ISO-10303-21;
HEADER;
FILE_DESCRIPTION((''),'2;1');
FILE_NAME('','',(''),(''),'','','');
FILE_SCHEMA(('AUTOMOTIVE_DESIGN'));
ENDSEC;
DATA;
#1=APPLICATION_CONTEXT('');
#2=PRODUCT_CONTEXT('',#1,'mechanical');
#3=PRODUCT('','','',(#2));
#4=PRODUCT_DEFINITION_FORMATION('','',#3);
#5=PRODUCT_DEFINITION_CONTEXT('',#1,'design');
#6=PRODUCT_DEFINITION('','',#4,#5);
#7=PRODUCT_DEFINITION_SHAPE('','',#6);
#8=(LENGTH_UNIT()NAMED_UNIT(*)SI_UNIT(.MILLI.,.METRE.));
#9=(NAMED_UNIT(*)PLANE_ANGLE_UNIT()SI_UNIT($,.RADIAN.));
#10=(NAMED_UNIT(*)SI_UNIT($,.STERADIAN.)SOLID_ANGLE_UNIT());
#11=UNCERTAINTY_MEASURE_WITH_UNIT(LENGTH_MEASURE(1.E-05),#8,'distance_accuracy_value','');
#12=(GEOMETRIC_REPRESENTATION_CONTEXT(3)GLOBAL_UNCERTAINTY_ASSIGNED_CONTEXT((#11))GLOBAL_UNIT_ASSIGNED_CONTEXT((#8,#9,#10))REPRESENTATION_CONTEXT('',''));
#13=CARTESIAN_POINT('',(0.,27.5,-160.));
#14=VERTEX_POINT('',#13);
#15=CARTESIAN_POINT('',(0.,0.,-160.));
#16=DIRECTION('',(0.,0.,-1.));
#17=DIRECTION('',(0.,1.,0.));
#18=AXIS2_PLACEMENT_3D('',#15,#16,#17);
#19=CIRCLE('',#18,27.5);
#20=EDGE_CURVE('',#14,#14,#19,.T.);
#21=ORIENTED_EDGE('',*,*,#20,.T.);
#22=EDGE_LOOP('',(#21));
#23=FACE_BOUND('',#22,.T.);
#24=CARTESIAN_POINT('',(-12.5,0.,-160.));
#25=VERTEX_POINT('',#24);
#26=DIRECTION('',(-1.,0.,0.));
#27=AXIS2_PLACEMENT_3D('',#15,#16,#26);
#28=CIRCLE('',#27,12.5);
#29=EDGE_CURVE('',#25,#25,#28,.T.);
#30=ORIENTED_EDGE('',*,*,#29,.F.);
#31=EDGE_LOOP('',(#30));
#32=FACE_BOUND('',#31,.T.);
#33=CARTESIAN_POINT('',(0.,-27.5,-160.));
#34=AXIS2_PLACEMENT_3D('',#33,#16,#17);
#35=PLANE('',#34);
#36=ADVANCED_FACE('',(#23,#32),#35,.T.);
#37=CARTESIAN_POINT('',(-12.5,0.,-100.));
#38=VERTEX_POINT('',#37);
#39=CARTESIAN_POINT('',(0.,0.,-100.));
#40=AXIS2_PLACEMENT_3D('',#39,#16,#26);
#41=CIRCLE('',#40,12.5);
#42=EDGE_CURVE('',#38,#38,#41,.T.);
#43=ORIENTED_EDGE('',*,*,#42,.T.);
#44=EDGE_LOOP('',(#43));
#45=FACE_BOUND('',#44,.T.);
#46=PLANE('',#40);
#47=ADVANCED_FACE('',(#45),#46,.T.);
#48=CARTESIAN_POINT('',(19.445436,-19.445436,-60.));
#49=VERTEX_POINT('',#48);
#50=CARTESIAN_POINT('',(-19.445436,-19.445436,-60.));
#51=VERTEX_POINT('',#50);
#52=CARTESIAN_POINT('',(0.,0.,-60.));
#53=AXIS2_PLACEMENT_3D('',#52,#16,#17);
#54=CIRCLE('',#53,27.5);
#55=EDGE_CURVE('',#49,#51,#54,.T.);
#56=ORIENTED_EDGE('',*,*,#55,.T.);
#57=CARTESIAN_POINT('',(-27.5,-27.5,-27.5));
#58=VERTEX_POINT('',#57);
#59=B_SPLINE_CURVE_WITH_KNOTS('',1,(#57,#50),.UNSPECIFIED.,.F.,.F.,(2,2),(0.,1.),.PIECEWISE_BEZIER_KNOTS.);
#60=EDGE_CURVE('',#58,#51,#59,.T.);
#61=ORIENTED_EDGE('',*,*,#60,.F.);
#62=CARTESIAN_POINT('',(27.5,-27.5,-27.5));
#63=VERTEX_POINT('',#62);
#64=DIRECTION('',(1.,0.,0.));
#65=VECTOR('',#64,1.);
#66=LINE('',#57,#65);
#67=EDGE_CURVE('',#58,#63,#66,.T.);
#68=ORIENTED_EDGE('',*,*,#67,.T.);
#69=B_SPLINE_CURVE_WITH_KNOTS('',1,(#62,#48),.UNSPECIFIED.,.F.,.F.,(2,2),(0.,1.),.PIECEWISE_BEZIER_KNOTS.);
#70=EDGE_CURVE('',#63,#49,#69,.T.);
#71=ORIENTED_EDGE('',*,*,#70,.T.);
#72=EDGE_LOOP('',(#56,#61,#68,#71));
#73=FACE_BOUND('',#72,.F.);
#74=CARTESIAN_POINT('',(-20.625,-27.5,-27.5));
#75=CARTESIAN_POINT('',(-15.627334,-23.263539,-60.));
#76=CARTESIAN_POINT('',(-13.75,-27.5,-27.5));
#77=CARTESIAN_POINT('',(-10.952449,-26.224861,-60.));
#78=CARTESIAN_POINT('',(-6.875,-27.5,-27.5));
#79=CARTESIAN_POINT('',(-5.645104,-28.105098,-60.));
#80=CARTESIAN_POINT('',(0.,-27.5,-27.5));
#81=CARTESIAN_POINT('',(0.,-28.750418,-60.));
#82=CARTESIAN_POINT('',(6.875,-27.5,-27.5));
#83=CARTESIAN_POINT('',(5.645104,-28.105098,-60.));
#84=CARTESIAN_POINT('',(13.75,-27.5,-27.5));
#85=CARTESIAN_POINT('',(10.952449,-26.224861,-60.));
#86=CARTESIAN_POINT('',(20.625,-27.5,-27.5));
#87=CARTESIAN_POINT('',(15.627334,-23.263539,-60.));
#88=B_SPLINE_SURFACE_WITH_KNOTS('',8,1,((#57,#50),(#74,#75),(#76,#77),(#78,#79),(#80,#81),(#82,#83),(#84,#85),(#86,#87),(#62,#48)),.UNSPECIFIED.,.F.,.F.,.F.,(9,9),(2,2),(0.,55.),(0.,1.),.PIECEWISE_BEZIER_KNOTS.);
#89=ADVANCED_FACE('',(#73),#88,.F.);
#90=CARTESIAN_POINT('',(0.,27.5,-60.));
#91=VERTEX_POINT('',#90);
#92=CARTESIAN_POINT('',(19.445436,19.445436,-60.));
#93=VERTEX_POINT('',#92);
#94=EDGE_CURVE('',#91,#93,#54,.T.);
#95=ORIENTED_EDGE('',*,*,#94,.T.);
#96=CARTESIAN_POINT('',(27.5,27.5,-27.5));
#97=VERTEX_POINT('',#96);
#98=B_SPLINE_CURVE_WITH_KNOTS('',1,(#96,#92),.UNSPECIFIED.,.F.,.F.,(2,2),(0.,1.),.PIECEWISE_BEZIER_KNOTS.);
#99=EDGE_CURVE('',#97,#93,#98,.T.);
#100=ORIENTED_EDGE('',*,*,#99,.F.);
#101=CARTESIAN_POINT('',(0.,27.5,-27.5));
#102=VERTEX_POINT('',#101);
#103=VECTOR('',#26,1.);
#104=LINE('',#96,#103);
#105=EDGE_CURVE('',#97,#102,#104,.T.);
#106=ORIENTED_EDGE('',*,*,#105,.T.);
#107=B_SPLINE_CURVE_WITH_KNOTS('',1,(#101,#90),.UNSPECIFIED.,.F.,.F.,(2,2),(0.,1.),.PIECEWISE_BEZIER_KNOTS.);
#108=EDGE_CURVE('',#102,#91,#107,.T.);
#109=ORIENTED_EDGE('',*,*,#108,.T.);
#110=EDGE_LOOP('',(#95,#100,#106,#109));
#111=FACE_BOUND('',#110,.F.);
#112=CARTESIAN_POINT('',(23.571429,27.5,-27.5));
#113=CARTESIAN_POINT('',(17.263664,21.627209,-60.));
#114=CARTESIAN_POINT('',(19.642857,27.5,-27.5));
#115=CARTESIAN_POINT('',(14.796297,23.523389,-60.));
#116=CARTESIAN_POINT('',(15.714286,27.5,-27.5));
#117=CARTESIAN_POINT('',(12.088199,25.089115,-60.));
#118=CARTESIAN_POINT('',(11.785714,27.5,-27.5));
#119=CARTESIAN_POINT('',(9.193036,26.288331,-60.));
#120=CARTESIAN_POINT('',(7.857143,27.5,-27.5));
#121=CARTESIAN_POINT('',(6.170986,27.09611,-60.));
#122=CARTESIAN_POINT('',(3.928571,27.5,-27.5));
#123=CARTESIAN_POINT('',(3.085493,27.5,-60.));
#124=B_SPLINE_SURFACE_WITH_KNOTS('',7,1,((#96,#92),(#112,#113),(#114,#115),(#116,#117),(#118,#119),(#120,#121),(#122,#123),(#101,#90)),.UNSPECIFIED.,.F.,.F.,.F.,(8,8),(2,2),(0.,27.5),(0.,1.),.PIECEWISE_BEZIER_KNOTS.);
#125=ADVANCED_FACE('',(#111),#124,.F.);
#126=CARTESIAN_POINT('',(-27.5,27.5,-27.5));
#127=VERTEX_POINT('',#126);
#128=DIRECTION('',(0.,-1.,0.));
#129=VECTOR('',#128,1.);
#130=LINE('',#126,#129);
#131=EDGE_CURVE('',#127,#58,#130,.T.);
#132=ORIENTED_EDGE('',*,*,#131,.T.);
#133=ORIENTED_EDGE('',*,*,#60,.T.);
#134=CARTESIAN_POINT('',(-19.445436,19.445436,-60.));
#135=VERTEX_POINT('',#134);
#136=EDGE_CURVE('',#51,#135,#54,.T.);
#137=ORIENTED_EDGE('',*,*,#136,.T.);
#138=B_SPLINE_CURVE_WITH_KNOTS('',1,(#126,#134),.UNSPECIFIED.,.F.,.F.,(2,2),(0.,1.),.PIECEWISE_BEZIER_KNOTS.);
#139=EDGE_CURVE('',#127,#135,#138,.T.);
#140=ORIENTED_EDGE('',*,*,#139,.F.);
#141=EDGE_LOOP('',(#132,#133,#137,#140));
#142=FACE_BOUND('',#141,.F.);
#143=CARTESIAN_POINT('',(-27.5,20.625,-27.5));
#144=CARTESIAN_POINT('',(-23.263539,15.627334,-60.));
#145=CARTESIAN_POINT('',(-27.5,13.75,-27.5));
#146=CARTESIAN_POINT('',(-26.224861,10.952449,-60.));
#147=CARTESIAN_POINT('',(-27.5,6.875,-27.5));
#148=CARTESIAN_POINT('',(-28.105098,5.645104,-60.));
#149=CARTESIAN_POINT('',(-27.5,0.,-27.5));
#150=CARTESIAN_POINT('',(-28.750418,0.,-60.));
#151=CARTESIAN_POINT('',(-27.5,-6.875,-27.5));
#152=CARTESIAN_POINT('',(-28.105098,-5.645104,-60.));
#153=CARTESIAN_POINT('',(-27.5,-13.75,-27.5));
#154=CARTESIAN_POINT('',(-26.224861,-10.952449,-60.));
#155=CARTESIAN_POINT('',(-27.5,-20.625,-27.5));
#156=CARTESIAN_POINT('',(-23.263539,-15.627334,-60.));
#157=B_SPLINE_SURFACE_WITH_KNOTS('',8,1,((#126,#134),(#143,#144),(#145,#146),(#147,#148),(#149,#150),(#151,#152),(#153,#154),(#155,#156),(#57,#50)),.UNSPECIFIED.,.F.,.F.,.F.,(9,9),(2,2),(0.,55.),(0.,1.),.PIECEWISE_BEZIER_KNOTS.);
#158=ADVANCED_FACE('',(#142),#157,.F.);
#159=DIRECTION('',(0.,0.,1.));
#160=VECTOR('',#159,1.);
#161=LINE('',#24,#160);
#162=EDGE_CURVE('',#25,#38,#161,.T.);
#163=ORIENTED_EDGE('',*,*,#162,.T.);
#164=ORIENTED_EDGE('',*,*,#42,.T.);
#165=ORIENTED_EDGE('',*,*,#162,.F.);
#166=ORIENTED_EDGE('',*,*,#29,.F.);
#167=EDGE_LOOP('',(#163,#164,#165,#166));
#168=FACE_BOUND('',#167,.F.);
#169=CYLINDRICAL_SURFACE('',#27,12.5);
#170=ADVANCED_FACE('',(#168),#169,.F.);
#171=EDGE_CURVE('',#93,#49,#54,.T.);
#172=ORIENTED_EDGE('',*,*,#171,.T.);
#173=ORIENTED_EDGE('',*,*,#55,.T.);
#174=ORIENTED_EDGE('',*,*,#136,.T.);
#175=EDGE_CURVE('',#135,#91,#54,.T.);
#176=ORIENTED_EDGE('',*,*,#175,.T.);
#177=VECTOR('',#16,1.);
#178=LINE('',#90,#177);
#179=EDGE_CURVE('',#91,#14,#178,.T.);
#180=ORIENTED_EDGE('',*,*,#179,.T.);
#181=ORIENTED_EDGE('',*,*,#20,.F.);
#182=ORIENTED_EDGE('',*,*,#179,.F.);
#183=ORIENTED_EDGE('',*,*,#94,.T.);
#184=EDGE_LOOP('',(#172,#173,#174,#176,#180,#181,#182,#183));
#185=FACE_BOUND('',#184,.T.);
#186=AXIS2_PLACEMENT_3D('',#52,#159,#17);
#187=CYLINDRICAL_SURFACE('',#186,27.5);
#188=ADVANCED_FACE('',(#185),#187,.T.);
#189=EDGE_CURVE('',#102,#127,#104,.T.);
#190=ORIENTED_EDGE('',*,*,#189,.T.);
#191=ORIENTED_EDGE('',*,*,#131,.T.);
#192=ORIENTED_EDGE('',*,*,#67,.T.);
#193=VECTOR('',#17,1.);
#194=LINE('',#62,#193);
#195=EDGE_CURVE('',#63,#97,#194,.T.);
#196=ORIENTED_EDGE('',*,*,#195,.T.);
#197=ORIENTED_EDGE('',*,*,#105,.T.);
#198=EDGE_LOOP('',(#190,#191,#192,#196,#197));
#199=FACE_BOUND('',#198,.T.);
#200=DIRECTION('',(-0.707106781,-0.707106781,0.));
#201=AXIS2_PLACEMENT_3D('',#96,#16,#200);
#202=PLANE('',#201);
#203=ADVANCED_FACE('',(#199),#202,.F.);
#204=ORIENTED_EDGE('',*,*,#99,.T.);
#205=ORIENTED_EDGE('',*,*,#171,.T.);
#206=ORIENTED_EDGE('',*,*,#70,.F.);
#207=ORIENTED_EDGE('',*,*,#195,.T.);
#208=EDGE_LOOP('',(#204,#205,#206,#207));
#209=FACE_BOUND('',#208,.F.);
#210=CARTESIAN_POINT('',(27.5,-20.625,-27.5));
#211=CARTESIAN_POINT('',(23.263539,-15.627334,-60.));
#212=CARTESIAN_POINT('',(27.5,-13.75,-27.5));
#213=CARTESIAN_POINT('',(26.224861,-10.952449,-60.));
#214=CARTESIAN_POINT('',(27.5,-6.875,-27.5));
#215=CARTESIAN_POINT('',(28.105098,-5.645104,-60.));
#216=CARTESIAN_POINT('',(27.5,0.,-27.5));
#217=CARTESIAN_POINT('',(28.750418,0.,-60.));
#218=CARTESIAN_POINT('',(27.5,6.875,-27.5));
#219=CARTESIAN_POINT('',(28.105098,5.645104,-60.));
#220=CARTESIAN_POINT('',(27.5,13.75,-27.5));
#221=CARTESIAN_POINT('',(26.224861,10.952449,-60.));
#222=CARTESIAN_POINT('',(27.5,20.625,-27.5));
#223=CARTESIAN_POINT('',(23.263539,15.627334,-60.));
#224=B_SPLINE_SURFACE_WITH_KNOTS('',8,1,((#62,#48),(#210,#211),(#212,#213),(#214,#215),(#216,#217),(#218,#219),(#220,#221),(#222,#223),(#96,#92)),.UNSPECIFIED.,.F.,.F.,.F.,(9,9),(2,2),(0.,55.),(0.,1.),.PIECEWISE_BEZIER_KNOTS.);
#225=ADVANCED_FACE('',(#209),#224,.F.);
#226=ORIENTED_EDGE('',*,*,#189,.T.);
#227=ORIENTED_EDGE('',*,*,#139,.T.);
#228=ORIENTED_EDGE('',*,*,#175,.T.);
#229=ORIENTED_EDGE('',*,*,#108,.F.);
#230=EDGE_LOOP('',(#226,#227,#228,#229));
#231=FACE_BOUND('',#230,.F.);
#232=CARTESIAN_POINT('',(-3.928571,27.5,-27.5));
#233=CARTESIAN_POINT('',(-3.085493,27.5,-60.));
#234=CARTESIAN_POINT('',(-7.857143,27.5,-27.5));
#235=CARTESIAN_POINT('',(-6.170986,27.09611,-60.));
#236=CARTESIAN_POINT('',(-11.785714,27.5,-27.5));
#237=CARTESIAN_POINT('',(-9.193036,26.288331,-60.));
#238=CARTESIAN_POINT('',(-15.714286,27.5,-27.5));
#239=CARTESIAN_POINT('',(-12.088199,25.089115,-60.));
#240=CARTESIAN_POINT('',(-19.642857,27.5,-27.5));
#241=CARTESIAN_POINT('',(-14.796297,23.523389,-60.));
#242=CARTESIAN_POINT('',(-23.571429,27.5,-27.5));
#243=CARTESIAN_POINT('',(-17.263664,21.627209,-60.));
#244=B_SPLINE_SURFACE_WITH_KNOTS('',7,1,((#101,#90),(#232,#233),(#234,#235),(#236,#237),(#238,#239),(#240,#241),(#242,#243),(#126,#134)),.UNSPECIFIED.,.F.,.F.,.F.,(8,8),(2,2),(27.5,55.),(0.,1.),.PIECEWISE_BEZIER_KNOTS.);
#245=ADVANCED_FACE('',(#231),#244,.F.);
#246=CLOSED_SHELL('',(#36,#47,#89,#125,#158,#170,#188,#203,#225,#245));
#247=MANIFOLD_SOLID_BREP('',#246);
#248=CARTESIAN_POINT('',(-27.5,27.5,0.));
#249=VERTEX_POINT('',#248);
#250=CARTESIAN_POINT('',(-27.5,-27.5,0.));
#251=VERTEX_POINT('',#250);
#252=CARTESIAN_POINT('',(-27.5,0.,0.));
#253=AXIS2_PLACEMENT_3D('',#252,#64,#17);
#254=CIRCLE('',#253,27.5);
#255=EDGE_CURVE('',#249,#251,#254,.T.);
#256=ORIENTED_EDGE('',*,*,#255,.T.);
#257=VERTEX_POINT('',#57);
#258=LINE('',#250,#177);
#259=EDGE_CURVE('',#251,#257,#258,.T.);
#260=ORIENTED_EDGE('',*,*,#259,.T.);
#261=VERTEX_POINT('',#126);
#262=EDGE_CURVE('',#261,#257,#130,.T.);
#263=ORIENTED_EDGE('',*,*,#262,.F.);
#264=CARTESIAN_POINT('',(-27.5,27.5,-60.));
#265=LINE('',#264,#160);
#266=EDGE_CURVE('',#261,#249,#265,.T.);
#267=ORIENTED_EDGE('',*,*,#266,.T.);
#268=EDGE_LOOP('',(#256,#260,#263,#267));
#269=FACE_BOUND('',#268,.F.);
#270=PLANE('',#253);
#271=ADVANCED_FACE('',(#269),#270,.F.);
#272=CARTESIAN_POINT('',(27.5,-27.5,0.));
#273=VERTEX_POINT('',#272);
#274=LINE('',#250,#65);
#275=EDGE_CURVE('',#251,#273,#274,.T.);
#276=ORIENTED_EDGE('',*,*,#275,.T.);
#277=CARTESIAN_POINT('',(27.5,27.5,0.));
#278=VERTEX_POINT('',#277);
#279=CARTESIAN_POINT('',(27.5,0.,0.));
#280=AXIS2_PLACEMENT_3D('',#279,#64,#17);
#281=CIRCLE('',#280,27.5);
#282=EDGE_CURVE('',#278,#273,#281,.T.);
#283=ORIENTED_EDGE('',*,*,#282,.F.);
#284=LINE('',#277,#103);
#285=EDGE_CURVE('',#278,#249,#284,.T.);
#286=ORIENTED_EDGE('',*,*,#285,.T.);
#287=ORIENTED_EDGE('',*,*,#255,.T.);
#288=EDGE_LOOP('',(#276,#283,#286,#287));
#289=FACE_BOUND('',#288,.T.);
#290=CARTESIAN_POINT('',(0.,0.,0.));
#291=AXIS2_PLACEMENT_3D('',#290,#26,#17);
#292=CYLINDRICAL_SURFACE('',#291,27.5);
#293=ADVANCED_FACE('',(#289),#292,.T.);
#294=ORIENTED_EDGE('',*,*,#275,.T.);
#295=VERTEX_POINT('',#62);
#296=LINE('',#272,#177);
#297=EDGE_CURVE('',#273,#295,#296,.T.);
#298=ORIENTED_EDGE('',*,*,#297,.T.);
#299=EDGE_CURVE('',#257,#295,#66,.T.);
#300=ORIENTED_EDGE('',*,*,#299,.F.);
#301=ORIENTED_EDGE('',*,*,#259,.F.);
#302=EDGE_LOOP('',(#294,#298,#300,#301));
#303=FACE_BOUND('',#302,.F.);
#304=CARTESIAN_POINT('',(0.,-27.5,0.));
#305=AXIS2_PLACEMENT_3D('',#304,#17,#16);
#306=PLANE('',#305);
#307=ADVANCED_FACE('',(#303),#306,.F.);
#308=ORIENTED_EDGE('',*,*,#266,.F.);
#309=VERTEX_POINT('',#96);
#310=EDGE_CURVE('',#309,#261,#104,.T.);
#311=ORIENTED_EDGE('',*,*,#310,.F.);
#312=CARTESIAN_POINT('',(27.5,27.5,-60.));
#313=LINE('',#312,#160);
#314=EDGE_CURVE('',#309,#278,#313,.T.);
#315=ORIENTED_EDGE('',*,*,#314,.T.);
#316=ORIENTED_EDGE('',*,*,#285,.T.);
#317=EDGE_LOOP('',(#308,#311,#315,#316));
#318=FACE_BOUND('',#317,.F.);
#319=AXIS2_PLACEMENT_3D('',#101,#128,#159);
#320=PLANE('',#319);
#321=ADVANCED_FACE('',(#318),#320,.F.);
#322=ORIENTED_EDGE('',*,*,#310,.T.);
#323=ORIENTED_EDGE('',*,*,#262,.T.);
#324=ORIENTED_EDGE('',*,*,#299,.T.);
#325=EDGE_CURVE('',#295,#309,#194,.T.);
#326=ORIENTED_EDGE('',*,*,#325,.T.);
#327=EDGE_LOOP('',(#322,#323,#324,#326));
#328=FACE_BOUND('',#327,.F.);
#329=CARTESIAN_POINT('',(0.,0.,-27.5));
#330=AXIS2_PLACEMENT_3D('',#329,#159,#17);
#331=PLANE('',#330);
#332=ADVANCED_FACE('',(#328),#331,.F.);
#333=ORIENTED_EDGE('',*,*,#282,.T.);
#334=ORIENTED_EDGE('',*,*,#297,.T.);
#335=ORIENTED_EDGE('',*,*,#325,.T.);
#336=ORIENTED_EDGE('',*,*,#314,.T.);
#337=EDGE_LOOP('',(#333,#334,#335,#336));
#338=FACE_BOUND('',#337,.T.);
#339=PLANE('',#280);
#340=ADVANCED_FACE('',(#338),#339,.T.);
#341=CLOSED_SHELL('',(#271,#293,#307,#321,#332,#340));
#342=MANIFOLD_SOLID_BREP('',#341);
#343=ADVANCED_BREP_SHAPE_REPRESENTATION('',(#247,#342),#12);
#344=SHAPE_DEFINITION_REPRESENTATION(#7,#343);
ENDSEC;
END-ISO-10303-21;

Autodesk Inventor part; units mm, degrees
ref_plane "YZ Plane" through (0, 0, 0) normal (1, 0, 0) x (0, 1, 0)
sketch "Sketch6" plane through (0, 0, 0) normal (1, 0, 0) x (0, 1, 0)
  circle A0 centre (0, 0) radius 27.5
  line L0 (-27.5, 0) -> (-27.5, -60)
  line L1 (-27.5, -60) -> (27.5, -60)
  line L2 (27.5, -60) -> (27.5, 0)
  line L3 (0, 0) -> (0, -60) construction
  line L4 (-27.5, -27.5) -> (27.5, -27.5)
  dimension "d38" = 55
  dimension "d39" = 60
extrude "Extrusion8" add sketch "Sketch6" along normal mid plane 55 contours A0 | L2 L4 A0 | A0 L4 L0
ref_plane "Work Plane2" through (0, -27.5, -60) normal (0, 0, -1) x (0, 1, 0)
ref_plane "Work Plane1" through (0, 0, 27.5) normal (0, 0, 1) x (1, 0, 0)
sketch "Sketch3" plane through (0, -27.5, -60) normal (0, 0, -1) x (0, 1, 0)
  circle A0 centre (27.5, 0) radius 27.5
  line L0 (55, -27.5) -> (55, 27.5) projected
loft "Loft1" add profiles "Sketch3" separate body section 1 edges at (0, 27.5, -27.5) (27.5, 0, -27.5) (0, -27.5, -27.5) (-27.5, 0, -27.5)
extrude "Extrusion1" add sketch "Sketch3" along normal blind 100 bodies 2
sketch "Sketch5" plane through (0, 0, -160) normal (0, 0, -1) x (-1, 0, 0)
  circle A0 centre (0, 0) radius 12.5
  point P0 (0, 0)
  dimension "d35" = 25
extrude "Extrusion7" cut sketch "Sketch5" against normal blind 60 bodies 2
properties part number "shank_2"
